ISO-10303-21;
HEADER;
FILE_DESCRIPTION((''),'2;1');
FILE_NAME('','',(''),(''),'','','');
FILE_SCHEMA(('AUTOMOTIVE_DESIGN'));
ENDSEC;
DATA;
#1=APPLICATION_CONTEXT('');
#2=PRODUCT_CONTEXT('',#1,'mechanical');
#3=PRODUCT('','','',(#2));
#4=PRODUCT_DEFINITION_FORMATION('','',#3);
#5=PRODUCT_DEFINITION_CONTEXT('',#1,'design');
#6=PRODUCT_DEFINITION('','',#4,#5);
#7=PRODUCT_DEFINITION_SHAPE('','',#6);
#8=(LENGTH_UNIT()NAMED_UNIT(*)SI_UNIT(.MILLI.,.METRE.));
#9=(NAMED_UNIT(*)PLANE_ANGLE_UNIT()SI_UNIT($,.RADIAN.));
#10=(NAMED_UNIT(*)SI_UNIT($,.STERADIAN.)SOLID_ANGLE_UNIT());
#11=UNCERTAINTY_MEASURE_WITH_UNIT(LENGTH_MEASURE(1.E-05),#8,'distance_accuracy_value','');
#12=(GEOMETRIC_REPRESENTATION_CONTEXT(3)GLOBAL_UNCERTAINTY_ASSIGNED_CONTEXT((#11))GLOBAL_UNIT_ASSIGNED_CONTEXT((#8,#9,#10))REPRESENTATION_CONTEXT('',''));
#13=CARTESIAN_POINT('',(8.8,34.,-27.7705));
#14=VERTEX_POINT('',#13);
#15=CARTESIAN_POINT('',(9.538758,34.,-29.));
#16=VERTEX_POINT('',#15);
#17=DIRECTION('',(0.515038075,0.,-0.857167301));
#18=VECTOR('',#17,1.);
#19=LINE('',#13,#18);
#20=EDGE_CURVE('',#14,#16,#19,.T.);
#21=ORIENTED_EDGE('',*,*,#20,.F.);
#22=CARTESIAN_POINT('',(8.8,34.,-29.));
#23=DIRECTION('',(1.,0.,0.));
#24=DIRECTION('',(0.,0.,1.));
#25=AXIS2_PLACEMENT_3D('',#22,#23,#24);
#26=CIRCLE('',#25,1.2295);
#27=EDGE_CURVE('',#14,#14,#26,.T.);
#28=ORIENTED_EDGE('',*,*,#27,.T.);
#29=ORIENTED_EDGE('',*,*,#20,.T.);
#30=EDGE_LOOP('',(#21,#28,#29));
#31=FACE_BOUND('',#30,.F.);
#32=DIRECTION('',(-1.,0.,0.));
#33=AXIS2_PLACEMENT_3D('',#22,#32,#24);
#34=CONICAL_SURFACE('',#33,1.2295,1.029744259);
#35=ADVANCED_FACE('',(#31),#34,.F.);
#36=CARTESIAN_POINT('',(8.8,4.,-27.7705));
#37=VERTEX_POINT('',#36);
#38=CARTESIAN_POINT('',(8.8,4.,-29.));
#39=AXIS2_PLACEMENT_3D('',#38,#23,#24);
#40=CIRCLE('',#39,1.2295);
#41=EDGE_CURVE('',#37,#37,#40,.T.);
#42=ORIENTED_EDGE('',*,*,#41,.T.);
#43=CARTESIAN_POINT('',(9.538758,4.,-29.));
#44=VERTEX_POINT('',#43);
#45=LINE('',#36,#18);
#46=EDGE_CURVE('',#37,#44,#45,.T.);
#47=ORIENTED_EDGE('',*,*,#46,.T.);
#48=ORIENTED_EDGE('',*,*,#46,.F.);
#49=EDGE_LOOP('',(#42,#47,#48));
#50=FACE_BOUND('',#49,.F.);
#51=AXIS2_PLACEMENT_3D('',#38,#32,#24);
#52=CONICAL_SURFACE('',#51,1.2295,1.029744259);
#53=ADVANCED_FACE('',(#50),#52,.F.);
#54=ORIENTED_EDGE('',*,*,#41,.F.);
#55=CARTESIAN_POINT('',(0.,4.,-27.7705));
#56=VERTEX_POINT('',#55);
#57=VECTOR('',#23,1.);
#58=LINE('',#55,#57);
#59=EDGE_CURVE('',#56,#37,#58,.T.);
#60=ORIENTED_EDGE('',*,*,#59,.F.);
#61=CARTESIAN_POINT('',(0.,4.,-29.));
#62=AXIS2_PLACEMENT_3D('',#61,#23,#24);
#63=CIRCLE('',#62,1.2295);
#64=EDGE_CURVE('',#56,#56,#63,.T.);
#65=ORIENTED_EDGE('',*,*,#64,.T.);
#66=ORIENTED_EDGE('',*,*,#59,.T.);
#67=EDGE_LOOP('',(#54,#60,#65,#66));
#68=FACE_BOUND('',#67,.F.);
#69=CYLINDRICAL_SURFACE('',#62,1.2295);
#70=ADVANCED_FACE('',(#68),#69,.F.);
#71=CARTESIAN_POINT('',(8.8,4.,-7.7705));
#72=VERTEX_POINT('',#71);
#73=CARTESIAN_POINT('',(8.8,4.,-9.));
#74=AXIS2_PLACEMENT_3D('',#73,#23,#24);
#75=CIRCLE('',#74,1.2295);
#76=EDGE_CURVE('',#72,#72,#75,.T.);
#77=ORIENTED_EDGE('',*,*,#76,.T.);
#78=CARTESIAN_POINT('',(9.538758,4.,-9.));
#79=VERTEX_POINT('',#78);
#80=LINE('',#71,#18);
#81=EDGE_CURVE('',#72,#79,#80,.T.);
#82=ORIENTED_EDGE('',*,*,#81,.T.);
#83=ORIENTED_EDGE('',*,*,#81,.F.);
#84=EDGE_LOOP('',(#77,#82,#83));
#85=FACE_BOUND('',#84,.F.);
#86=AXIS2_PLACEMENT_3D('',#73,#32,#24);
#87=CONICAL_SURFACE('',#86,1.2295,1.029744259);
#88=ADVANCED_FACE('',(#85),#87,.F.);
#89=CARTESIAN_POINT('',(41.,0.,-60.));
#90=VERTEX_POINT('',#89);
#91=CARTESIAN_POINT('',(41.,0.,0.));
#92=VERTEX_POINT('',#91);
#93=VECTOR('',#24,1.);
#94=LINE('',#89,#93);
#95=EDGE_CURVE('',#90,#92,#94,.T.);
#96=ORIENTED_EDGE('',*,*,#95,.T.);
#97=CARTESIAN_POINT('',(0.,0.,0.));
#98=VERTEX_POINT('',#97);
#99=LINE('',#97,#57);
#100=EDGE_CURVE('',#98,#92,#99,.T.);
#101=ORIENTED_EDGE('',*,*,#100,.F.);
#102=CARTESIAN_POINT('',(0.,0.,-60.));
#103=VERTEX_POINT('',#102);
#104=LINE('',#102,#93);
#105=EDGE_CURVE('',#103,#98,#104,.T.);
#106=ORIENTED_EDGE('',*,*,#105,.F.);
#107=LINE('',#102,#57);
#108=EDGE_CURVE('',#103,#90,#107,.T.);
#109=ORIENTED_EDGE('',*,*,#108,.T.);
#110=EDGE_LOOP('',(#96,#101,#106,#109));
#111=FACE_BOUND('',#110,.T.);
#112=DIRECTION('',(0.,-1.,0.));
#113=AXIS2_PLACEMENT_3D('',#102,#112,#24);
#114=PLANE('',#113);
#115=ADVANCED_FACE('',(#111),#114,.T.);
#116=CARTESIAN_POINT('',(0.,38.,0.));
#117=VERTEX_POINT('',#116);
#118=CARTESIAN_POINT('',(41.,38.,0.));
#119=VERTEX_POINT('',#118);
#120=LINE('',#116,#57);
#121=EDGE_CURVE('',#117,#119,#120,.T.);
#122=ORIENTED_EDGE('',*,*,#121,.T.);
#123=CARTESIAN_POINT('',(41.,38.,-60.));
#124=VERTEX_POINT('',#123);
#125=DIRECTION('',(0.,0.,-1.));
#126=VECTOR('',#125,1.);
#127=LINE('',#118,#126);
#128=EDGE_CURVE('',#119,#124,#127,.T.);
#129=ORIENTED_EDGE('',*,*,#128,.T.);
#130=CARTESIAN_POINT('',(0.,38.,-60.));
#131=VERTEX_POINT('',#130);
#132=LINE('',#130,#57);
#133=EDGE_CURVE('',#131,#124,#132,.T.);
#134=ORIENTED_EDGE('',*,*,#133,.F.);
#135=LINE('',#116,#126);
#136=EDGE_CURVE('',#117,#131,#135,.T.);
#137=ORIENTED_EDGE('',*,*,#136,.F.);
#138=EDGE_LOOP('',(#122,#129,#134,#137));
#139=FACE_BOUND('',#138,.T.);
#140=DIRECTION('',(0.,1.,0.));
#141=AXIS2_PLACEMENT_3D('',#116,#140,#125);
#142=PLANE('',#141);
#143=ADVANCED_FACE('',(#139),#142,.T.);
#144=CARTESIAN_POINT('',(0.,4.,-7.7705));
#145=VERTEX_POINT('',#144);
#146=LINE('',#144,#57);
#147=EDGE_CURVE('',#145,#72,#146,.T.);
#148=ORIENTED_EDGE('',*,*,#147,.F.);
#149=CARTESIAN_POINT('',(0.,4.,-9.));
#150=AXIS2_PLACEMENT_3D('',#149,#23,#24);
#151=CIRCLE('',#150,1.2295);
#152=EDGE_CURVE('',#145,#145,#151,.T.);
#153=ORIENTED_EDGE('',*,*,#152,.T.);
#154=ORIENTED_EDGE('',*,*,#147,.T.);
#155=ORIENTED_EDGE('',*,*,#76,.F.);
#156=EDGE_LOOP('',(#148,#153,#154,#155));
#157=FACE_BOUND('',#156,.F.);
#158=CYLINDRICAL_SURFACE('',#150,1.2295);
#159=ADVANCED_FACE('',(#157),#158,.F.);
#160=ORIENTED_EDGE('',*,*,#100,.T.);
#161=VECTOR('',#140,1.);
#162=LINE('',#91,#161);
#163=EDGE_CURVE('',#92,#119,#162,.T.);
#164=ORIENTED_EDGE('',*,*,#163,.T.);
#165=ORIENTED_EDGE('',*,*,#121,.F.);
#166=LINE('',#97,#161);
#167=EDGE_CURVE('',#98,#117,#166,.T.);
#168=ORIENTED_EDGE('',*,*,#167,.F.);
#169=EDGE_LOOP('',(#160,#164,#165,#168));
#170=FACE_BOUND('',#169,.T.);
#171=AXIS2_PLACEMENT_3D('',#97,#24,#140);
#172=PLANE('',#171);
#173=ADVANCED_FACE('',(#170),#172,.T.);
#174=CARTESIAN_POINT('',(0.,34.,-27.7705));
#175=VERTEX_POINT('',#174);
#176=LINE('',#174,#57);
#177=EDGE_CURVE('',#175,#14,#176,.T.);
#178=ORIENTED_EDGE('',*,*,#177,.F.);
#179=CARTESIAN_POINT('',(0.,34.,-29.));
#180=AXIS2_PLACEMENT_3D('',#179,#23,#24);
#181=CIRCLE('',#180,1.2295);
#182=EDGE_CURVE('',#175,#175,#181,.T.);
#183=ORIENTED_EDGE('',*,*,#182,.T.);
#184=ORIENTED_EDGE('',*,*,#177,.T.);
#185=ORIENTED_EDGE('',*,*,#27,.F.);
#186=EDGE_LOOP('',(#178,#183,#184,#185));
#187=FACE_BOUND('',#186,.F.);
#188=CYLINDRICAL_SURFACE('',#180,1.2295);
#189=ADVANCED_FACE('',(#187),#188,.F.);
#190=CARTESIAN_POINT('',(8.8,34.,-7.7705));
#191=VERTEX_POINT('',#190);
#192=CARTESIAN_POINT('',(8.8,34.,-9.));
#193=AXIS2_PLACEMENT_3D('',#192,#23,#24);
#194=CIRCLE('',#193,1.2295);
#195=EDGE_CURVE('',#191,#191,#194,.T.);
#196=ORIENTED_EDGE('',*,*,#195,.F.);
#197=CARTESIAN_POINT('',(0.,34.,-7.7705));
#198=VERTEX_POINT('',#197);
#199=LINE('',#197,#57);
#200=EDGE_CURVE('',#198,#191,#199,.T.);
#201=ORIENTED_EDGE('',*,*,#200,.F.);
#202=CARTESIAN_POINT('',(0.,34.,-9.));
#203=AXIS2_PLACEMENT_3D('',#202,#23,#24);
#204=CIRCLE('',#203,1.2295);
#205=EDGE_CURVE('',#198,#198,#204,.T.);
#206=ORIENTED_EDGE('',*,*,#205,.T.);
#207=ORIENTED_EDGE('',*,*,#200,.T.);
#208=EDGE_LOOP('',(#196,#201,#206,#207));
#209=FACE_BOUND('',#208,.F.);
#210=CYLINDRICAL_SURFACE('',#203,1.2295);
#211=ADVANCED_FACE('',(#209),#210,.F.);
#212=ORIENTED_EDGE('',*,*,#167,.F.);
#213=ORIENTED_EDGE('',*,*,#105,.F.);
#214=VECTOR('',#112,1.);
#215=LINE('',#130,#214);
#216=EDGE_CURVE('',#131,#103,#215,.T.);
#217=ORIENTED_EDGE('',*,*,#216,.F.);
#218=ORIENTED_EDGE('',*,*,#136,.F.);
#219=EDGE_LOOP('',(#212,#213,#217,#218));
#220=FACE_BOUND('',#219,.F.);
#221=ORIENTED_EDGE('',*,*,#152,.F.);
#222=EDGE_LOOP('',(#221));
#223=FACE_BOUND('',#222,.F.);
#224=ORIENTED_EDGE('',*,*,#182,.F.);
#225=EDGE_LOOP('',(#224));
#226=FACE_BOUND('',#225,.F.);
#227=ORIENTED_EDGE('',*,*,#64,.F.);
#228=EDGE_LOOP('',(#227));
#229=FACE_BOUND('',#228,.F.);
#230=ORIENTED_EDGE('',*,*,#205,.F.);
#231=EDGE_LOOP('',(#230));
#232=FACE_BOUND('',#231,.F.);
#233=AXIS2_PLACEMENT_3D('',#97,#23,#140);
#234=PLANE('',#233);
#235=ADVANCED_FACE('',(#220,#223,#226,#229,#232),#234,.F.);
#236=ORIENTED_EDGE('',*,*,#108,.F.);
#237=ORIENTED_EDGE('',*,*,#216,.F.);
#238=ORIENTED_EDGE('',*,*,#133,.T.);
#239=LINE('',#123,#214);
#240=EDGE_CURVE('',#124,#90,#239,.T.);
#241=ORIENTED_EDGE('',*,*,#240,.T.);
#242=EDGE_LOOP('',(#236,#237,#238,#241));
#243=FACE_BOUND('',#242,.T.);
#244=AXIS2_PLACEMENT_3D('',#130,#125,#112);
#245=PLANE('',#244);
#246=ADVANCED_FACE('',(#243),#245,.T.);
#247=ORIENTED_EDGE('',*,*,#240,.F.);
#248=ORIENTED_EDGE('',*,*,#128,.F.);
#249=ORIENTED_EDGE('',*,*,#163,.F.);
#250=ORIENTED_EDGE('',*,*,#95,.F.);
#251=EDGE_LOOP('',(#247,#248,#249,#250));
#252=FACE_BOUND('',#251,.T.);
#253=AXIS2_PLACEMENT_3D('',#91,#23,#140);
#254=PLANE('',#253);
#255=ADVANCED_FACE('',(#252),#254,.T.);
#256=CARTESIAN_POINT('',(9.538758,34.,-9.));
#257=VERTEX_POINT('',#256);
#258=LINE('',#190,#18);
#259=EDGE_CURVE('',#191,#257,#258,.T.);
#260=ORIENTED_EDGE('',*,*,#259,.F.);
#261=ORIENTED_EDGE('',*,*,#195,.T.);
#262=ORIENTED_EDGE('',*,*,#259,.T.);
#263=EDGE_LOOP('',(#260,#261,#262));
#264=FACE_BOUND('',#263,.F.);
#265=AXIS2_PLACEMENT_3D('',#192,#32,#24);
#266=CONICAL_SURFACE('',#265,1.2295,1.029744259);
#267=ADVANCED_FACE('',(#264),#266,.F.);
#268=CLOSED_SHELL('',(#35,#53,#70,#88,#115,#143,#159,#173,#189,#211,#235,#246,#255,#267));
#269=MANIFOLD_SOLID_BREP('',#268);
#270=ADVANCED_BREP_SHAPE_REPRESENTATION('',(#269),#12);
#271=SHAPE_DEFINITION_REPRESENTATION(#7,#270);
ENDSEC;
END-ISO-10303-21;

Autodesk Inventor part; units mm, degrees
ref_plane "YZ Plane" through (0, 0, 0) normal (1, 0, 0) x (0, 1, 0)
ref_plane "XZ Plane" through (0, 0, 0) normal (0, 1, 0) x (-1, 0, 0)
ref_plane "XY Plane" through (0, 0, 0) normal (0, 0, 1) x (1, 0, 0)
sketch "スケッチ1" plane through (0, 0, 0) normal (1, 0, 0) x (0, 1, 0)
  line L0 (0, 0) -> (38, 0)
  line L1 (38, 0) -> (38, -60)
  line L2 (38, -60) -> (0, -60)
  line L3 (0, -60) -> (0, 0)
  dimension "d0" = 60
  dimension "d1" = 38
extrude "押し出し1" add sketch "スケッチ1" along normal blind 41
sketch "スケッチ4" plane through (0, 0, 0) normal (-1, 0, 0) x (0, 0, 1)
  line L0 (0, 0) -> (-60, 0) projected
  line L1 (0, 38) -> (0, 0) projected
  point P0 (-29, 34)
  point P1 (-9, 34)
  point P2 (-9, 4)
  point P3 (-29, 4)
  dimension "d4" = 20
  dimension "d5" = 30
  dimension "d7" = 9
  dimension "d15" = 4
hole "穴1" at (0, 34, -29) at (0, 34, -9) at (0, 4, -9) at (0, 4, -29) direction (1, 0, 0) diameter 2.459 depth 8.8 tip angle 118 thread size "M3x0.5" class "6H" standard "ISO Metric profile"
